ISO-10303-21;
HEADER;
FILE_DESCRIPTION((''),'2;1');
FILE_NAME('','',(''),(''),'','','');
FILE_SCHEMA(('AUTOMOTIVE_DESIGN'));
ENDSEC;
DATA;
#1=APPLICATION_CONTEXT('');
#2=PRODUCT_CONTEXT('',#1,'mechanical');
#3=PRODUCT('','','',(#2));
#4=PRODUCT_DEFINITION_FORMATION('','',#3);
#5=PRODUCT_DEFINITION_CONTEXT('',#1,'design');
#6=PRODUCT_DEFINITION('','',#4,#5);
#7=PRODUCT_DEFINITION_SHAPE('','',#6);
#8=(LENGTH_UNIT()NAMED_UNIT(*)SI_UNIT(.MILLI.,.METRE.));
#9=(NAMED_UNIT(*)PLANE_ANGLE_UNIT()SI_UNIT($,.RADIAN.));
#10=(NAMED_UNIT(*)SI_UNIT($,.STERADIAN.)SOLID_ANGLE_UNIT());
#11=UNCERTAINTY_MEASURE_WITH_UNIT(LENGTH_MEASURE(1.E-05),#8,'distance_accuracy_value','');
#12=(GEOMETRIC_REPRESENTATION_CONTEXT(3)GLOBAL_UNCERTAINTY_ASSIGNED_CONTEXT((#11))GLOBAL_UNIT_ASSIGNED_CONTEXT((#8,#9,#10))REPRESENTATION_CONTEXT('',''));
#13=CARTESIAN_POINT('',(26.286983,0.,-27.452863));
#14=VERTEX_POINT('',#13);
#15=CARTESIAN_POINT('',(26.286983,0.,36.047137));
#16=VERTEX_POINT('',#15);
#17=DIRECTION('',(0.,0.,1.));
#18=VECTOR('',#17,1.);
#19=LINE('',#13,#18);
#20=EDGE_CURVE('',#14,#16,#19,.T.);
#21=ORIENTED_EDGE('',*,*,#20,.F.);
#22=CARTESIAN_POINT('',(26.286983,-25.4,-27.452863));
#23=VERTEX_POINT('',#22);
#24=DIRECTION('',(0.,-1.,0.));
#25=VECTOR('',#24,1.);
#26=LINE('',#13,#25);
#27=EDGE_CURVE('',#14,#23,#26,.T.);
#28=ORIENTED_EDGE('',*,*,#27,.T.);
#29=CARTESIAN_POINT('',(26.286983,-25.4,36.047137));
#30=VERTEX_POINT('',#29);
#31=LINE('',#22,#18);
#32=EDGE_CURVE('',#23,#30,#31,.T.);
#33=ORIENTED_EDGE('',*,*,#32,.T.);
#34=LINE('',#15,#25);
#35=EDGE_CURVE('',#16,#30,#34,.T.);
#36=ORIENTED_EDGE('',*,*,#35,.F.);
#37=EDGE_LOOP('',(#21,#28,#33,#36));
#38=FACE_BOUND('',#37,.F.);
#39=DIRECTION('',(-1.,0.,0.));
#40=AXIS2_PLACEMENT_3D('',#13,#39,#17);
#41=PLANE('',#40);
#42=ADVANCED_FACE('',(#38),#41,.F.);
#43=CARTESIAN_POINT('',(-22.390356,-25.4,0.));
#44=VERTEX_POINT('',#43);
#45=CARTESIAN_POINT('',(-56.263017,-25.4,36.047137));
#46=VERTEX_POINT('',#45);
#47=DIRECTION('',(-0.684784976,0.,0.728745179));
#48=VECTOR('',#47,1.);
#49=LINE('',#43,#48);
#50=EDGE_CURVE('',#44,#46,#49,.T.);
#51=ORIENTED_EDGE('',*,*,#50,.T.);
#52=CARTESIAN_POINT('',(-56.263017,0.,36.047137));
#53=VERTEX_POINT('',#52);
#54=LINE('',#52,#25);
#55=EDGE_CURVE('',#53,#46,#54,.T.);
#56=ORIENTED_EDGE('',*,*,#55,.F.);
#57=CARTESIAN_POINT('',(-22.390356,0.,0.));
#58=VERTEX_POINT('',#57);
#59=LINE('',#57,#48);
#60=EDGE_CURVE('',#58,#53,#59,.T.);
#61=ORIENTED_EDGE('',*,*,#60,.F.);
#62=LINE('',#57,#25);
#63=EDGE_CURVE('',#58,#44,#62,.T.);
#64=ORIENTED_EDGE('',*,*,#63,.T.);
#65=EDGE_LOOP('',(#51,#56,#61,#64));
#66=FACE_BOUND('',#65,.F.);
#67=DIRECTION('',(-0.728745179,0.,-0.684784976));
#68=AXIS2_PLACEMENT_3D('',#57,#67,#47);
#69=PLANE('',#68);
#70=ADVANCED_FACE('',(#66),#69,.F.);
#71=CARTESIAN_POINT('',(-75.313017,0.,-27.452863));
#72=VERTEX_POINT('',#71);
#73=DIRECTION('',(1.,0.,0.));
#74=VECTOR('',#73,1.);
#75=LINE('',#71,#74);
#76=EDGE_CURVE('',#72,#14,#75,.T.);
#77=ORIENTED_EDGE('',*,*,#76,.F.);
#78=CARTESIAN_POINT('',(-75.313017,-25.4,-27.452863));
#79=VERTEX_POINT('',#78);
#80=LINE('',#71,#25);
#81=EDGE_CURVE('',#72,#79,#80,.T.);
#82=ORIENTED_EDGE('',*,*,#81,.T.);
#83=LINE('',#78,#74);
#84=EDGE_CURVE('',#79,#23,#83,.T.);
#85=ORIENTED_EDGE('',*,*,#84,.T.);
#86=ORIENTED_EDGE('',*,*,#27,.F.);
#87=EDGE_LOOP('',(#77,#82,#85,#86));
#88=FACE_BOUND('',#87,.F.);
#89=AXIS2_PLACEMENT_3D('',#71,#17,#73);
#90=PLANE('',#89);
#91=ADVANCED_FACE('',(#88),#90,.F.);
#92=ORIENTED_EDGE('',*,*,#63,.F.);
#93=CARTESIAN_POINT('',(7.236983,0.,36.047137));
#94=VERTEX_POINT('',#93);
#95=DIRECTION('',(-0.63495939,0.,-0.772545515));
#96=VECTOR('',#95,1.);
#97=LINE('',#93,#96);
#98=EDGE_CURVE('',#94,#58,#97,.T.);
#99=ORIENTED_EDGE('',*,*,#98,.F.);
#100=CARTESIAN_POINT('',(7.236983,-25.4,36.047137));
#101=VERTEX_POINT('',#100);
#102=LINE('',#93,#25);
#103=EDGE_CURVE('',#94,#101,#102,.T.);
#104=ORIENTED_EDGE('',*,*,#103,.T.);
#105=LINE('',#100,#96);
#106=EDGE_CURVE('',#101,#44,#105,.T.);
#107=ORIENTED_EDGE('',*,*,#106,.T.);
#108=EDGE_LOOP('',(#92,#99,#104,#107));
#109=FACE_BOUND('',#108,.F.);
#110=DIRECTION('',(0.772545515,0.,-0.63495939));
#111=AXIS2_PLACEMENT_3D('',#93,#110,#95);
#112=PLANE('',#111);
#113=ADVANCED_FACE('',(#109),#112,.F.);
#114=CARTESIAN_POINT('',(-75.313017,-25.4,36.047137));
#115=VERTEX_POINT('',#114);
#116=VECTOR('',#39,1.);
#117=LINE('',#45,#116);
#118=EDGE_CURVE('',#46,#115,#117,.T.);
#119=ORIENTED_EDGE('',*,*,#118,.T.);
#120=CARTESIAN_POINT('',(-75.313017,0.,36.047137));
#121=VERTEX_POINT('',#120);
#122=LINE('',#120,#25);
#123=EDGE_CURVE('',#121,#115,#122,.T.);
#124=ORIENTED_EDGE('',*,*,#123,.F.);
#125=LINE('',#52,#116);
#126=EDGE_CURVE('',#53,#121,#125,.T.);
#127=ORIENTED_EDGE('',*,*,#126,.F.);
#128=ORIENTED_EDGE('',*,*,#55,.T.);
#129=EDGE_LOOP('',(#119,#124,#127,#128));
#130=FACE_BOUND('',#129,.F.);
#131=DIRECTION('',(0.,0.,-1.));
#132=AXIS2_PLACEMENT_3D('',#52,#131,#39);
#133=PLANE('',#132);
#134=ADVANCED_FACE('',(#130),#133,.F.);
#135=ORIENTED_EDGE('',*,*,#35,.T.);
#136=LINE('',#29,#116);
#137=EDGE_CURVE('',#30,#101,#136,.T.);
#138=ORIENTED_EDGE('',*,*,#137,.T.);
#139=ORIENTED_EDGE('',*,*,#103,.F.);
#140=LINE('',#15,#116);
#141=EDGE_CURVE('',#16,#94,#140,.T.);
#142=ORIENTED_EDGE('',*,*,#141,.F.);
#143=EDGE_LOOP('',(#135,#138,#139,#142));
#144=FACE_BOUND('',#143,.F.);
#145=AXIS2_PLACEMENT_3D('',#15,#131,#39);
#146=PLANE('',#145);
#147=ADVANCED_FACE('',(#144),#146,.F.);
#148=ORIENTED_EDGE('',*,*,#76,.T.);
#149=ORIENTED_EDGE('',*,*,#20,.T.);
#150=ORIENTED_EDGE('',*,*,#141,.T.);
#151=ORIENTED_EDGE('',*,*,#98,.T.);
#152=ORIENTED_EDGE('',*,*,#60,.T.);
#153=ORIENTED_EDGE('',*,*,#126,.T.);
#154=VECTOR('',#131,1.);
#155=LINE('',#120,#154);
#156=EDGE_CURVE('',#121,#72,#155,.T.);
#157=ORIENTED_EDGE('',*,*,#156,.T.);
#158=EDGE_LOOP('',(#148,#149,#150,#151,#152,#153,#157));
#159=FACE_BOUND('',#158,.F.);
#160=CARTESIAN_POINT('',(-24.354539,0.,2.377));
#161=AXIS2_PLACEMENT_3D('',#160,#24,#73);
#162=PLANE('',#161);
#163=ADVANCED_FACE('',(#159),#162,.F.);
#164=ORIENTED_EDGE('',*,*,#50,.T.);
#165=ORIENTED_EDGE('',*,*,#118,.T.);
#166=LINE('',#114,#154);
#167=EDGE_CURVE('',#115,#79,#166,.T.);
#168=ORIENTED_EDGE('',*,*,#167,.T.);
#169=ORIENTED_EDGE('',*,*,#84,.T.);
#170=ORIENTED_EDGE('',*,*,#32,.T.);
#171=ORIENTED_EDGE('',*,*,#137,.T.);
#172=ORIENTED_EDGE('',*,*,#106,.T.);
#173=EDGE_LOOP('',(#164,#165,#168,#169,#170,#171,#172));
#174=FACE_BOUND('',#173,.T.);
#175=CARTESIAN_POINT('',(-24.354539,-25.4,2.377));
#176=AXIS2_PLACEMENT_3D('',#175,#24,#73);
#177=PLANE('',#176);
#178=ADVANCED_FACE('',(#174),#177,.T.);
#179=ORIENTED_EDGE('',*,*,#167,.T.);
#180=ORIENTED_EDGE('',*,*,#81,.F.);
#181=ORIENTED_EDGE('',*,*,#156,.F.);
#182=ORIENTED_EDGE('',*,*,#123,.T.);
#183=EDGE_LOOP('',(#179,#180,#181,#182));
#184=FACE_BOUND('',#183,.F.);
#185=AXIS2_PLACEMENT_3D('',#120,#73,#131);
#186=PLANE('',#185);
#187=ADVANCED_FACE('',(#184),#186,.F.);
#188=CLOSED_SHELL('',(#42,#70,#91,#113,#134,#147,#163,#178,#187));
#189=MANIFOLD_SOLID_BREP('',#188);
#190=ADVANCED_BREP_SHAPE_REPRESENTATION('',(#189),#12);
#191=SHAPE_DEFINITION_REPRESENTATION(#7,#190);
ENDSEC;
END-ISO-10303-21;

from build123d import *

# Parameters (mm, degrees)
F1_DEPTH = 25.4


# Not quite as in the source:
# - a feature names something its author has since deleted; it is built from what else it names


with BuildPart() as f1:
    # F0 (on Front) → F1 (new body)
    with BuildSketch(Plane.XZ):
        Polygon((-56.2630167723, 36.0471372604), (-75.3130167723, 36.0471372604), (-75.3130167723, -27.4528627396), (26.2869832277, -27.4528627396), (26.2869832277, 36.0471372604), (7.2369832277, 36.0471372604), (-22.3903562874, 0), align=None)
    extrude(amount=F1_DEPTH)


solid = f1.part
